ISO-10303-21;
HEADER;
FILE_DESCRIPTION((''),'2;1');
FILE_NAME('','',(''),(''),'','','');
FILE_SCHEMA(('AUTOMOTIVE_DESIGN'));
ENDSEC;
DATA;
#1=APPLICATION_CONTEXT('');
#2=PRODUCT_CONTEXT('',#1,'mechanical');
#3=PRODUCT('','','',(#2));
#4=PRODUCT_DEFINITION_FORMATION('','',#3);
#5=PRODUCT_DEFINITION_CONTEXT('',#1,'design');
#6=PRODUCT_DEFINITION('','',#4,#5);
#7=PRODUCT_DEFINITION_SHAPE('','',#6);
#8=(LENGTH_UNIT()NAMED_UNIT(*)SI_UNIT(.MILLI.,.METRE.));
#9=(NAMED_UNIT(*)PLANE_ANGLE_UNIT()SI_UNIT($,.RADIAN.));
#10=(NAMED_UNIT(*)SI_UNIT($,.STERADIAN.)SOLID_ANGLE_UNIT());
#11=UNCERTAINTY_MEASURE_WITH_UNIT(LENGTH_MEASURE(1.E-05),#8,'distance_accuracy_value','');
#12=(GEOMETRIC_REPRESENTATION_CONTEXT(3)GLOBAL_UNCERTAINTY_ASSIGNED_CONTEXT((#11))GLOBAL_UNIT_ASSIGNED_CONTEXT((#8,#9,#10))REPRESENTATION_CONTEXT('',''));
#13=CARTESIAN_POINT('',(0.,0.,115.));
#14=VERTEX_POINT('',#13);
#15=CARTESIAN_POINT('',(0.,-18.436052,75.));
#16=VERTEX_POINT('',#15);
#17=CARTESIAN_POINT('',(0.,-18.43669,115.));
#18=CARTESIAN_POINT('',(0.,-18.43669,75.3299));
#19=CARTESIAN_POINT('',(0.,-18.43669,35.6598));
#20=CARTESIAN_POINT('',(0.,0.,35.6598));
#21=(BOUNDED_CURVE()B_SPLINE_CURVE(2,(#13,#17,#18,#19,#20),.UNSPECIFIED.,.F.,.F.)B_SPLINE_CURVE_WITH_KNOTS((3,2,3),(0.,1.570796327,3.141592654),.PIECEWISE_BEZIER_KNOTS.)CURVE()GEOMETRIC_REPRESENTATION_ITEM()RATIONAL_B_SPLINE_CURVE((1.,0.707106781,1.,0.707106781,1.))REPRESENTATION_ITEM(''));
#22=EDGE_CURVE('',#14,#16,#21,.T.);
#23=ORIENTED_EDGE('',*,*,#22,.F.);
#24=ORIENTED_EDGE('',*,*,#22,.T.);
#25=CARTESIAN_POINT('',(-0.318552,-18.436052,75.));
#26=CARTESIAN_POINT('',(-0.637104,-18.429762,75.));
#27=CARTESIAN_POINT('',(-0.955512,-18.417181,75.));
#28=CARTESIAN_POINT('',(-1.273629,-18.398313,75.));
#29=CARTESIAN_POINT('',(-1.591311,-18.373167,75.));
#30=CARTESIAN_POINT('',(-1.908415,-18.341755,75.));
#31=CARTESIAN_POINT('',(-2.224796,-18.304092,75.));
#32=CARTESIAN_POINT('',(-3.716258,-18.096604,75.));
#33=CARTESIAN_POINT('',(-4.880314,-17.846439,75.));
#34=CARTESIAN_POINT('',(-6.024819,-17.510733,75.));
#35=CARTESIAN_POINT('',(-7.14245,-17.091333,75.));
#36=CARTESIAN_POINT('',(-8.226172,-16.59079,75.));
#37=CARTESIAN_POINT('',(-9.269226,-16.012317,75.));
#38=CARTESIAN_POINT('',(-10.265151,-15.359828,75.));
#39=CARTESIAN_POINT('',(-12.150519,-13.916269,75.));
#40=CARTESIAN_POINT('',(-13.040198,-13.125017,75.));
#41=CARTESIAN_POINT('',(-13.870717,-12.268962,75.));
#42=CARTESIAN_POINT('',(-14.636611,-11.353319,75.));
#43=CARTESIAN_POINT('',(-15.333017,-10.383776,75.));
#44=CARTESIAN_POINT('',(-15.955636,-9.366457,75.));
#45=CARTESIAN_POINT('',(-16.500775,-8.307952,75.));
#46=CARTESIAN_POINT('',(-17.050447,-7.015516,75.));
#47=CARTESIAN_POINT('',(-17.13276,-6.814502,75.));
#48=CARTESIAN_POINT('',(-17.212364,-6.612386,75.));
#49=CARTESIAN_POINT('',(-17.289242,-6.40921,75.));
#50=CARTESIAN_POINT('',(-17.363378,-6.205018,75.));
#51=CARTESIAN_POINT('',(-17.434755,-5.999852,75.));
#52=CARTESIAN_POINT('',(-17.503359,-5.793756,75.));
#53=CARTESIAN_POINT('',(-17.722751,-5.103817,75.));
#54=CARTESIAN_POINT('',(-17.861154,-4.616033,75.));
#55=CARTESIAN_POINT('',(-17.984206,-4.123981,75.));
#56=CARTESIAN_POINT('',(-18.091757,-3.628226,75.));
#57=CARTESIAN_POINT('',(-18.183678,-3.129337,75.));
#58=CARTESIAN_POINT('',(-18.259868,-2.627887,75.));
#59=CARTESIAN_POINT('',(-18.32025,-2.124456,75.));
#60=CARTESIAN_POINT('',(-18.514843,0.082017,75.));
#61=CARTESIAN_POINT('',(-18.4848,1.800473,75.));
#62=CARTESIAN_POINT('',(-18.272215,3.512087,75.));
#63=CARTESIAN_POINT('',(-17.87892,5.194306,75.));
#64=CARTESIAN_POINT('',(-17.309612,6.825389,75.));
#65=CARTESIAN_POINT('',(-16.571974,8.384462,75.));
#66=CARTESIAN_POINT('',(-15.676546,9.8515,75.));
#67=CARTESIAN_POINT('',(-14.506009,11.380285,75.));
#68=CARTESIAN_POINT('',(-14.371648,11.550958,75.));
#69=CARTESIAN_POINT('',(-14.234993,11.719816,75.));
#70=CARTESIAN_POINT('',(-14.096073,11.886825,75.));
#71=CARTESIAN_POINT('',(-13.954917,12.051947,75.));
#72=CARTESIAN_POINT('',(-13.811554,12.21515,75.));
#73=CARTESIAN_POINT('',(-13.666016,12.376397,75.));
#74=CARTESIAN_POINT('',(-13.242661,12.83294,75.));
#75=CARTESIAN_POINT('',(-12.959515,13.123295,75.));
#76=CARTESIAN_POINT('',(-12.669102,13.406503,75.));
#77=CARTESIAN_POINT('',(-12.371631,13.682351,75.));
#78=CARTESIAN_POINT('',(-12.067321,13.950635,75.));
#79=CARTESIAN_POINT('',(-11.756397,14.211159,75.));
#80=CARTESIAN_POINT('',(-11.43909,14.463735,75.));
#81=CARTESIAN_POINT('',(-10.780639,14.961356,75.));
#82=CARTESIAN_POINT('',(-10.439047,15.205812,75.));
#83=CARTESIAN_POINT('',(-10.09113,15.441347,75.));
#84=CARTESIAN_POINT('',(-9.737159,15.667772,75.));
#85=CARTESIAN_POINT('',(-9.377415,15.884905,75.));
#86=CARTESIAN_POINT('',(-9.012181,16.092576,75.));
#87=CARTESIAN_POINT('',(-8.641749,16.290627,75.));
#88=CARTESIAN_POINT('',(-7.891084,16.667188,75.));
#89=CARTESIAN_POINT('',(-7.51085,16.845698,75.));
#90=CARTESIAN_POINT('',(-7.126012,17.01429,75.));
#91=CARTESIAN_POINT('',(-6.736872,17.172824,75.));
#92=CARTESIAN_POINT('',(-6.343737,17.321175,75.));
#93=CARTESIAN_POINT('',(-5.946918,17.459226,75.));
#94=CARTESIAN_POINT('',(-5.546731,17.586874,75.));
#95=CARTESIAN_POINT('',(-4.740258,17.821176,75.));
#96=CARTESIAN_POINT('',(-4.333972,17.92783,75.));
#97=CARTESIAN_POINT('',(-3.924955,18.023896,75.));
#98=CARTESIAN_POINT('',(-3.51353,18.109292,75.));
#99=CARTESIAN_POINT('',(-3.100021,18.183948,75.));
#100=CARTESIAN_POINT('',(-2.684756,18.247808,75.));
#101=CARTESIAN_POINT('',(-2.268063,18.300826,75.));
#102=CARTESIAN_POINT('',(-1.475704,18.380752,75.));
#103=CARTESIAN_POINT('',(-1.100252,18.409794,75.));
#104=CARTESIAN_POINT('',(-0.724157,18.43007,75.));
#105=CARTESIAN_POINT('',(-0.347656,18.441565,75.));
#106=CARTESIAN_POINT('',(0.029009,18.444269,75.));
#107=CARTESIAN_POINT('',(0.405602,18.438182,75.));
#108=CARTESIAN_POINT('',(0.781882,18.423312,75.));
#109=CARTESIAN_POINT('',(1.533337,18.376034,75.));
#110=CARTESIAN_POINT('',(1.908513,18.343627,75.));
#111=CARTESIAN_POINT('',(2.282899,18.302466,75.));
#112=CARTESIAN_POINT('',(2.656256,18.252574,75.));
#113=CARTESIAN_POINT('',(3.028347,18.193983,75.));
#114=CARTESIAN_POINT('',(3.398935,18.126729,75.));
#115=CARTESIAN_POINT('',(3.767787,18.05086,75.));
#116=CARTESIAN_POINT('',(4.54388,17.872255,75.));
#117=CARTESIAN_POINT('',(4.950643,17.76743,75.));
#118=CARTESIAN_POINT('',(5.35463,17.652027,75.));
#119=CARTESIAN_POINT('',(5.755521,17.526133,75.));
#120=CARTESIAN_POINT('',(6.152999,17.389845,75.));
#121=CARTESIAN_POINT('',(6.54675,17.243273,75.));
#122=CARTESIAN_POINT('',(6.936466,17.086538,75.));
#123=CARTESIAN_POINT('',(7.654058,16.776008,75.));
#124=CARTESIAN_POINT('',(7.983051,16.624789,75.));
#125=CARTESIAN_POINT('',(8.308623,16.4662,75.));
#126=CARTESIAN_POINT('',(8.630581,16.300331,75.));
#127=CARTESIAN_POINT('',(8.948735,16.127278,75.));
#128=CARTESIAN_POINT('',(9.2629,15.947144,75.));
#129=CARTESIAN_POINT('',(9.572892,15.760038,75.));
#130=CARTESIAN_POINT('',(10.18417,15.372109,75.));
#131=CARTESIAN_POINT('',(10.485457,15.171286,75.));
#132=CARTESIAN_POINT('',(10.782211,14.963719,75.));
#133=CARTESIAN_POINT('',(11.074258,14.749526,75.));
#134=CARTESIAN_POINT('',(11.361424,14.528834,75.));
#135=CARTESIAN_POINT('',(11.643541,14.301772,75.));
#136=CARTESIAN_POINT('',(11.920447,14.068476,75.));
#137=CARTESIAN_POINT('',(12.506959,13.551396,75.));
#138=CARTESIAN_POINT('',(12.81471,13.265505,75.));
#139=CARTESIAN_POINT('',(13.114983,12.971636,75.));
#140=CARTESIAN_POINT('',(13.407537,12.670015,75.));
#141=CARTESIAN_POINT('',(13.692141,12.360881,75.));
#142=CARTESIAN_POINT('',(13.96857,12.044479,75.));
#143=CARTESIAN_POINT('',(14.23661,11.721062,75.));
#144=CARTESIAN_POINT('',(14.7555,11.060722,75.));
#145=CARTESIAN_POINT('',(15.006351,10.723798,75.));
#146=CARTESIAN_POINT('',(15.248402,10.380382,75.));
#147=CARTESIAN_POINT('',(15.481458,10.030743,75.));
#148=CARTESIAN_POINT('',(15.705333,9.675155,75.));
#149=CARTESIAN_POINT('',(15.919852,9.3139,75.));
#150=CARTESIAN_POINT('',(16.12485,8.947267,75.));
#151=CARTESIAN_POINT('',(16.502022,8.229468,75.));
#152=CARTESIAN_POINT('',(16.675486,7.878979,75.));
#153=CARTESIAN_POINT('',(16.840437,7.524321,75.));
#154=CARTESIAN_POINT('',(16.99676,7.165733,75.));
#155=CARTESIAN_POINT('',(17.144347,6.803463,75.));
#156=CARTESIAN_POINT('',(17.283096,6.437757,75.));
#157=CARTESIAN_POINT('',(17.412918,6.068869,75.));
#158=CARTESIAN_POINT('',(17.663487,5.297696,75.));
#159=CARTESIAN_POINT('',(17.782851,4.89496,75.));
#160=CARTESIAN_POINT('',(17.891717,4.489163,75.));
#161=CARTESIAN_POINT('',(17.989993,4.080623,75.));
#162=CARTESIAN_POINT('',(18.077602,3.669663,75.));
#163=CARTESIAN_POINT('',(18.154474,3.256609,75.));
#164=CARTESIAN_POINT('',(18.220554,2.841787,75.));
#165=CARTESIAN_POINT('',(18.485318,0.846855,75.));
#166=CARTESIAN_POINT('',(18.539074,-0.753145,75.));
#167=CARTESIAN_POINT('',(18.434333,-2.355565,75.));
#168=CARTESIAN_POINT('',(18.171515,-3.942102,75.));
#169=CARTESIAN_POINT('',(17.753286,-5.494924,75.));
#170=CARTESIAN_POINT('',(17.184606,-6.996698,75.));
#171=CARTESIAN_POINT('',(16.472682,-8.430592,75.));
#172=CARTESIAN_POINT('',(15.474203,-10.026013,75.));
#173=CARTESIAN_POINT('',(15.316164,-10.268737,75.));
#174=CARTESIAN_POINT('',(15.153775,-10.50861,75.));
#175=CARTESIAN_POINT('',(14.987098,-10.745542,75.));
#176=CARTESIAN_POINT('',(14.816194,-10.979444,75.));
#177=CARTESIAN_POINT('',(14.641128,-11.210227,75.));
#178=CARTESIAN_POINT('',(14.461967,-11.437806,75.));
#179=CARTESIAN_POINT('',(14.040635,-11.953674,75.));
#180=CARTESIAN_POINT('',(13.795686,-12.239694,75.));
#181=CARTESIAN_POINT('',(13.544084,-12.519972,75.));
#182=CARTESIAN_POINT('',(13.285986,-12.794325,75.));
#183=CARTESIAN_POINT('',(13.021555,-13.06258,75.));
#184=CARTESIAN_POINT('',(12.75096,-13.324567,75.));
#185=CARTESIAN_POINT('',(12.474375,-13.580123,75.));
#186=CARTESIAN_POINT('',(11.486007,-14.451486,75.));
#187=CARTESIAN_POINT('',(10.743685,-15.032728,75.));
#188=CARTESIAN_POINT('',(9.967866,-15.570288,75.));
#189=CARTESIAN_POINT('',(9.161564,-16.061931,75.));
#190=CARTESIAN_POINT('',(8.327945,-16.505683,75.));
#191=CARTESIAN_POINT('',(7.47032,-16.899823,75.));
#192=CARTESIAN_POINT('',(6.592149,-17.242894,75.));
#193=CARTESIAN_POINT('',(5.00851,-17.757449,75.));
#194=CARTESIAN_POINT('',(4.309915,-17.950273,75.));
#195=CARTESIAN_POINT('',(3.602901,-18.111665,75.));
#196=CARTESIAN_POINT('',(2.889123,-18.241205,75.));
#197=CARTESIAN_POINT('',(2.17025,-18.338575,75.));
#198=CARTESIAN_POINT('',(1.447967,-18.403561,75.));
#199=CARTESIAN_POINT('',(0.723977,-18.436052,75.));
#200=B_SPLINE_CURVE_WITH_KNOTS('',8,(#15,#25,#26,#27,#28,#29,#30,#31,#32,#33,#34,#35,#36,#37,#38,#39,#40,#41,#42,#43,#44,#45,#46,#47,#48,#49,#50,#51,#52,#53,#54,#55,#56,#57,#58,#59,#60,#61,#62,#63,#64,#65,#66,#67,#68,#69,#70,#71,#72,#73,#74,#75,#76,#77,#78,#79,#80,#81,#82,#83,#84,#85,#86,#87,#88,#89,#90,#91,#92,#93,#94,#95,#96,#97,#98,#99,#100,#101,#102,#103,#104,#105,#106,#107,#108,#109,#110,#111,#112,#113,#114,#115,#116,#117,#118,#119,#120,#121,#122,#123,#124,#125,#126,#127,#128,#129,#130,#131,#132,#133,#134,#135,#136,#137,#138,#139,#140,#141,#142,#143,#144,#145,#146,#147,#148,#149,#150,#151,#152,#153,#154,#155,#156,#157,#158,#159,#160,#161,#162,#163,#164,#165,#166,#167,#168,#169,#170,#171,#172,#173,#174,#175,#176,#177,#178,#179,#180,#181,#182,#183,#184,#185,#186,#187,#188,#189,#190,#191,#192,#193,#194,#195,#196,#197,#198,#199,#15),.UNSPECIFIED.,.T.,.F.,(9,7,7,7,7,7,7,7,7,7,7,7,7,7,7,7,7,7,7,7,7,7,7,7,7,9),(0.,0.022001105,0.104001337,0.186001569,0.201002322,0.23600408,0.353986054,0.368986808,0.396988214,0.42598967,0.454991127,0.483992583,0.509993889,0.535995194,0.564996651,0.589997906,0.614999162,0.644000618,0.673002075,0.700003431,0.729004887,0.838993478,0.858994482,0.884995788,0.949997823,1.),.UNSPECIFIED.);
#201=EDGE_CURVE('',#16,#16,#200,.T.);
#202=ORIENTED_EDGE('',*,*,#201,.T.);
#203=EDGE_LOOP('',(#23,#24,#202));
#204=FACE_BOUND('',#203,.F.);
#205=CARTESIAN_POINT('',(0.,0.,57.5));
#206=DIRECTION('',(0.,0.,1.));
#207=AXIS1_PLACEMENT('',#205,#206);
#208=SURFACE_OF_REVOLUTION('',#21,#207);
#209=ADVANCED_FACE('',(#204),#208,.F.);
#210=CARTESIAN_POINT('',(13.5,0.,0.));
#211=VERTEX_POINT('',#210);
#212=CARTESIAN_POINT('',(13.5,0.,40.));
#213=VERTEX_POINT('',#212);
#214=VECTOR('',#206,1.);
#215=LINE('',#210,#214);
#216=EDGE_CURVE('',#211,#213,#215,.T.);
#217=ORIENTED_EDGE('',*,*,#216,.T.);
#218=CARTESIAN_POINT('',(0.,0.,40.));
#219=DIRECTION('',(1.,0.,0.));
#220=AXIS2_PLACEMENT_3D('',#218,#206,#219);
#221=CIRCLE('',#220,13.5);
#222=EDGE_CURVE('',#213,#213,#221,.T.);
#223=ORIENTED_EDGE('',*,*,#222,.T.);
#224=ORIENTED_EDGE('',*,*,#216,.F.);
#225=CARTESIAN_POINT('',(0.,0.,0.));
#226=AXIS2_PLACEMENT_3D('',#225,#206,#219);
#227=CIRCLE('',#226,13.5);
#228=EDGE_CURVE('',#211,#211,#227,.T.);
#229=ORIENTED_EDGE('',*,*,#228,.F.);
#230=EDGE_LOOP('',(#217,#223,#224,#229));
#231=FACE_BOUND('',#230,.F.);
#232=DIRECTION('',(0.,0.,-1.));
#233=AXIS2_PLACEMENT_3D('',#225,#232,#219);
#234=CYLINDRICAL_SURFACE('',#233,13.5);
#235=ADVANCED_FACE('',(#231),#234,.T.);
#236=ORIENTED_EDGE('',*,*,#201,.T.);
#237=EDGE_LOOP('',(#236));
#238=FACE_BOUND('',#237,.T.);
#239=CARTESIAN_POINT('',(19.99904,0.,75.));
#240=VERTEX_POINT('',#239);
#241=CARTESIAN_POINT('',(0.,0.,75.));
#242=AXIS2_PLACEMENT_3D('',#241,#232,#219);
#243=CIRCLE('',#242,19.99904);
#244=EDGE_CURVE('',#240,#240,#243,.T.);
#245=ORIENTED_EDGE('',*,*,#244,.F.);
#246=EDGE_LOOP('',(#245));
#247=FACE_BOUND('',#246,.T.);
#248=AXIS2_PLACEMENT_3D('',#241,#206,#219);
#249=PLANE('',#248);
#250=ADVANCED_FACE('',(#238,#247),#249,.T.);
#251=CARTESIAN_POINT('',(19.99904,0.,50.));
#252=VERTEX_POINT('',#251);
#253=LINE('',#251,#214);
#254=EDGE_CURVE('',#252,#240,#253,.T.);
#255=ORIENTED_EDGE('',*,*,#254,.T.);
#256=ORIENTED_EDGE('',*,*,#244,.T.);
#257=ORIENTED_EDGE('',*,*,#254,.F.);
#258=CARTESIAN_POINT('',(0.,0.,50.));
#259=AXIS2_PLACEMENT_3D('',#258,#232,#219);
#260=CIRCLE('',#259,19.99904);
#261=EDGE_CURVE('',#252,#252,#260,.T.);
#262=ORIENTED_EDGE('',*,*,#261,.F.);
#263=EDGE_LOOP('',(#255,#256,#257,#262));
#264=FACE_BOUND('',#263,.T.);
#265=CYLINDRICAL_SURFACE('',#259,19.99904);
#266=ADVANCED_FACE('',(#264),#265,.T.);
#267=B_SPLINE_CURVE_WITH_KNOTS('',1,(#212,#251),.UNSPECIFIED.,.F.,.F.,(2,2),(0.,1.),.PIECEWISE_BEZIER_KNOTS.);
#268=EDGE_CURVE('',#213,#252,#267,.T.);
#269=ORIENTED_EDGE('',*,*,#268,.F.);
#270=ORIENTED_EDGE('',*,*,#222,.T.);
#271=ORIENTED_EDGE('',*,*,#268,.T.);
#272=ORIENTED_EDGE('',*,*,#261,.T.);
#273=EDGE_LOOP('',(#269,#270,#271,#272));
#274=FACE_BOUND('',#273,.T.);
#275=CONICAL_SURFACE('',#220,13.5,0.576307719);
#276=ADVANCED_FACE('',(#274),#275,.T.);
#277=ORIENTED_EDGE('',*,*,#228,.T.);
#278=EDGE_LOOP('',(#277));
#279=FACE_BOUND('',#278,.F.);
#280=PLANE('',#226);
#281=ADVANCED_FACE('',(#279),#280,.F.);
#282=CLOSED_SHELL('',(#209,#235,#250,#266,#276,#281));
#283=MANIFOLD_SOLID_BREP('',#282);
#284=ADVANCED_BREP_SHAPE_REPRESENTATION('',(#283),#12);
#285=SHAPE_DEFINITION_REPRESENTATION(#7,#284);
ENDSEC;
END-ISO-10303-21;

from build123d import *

# Parameters (mm, degrees)
F0_R      = 13.5
F1_DEPTH  = 40
F1_FACE_R = 13.5
F2_DEPTH  = 10
F2_TAPER  = -33.02
F3_DEPTH  = 25


with BuildPart() as f1:
    # F0 (on Top) → F1 (new body)
    with BuildSketch(Plane.XY):
        Circle(F0_R)
    extrude(amount=F1_DEPTH)

    # F1_face (on face) → F2 (join)
    with BuildSketch(Plane.XY.offset(40)):
        Circle(F1_FACE_R)
    extrude(amount=F2_DEPTH, taper=F2_TAPER)

    # F3 (add): a face of the model
    f3_faces = [f1.faces().sort_by_distance(p)[0] for p in [
        (0, 0, 50),
    ]]
    extrude(f3_faces, amount=F3_DEPTH)

    # F4 (on Right) → F5 (revolve)
    with BuildSketch(Plane.YZ):
        with BuildLine():
            add(Edge.make_bspline(
                [(0, 115), (-18.4366899531, 115), (-18.4366899531, 75.3298997879), (-18.4366899531, 35.6597995758), (0, 35.6597995758)],
                knots=[0, 0, 0, 1.5707963268, 1.5707963268, 3.1415926536, 3.1415926536, 3.1415926536], degree=2, weights=[1, 0.7071067812, 1, 0.7071067812, 1]))
            Line((0, 35.6597995758), (0, 115))
        make_face()
    revolve(axis=Axis((0, 0, 57.5), (0, 0, 1)))


solid = f1.part
